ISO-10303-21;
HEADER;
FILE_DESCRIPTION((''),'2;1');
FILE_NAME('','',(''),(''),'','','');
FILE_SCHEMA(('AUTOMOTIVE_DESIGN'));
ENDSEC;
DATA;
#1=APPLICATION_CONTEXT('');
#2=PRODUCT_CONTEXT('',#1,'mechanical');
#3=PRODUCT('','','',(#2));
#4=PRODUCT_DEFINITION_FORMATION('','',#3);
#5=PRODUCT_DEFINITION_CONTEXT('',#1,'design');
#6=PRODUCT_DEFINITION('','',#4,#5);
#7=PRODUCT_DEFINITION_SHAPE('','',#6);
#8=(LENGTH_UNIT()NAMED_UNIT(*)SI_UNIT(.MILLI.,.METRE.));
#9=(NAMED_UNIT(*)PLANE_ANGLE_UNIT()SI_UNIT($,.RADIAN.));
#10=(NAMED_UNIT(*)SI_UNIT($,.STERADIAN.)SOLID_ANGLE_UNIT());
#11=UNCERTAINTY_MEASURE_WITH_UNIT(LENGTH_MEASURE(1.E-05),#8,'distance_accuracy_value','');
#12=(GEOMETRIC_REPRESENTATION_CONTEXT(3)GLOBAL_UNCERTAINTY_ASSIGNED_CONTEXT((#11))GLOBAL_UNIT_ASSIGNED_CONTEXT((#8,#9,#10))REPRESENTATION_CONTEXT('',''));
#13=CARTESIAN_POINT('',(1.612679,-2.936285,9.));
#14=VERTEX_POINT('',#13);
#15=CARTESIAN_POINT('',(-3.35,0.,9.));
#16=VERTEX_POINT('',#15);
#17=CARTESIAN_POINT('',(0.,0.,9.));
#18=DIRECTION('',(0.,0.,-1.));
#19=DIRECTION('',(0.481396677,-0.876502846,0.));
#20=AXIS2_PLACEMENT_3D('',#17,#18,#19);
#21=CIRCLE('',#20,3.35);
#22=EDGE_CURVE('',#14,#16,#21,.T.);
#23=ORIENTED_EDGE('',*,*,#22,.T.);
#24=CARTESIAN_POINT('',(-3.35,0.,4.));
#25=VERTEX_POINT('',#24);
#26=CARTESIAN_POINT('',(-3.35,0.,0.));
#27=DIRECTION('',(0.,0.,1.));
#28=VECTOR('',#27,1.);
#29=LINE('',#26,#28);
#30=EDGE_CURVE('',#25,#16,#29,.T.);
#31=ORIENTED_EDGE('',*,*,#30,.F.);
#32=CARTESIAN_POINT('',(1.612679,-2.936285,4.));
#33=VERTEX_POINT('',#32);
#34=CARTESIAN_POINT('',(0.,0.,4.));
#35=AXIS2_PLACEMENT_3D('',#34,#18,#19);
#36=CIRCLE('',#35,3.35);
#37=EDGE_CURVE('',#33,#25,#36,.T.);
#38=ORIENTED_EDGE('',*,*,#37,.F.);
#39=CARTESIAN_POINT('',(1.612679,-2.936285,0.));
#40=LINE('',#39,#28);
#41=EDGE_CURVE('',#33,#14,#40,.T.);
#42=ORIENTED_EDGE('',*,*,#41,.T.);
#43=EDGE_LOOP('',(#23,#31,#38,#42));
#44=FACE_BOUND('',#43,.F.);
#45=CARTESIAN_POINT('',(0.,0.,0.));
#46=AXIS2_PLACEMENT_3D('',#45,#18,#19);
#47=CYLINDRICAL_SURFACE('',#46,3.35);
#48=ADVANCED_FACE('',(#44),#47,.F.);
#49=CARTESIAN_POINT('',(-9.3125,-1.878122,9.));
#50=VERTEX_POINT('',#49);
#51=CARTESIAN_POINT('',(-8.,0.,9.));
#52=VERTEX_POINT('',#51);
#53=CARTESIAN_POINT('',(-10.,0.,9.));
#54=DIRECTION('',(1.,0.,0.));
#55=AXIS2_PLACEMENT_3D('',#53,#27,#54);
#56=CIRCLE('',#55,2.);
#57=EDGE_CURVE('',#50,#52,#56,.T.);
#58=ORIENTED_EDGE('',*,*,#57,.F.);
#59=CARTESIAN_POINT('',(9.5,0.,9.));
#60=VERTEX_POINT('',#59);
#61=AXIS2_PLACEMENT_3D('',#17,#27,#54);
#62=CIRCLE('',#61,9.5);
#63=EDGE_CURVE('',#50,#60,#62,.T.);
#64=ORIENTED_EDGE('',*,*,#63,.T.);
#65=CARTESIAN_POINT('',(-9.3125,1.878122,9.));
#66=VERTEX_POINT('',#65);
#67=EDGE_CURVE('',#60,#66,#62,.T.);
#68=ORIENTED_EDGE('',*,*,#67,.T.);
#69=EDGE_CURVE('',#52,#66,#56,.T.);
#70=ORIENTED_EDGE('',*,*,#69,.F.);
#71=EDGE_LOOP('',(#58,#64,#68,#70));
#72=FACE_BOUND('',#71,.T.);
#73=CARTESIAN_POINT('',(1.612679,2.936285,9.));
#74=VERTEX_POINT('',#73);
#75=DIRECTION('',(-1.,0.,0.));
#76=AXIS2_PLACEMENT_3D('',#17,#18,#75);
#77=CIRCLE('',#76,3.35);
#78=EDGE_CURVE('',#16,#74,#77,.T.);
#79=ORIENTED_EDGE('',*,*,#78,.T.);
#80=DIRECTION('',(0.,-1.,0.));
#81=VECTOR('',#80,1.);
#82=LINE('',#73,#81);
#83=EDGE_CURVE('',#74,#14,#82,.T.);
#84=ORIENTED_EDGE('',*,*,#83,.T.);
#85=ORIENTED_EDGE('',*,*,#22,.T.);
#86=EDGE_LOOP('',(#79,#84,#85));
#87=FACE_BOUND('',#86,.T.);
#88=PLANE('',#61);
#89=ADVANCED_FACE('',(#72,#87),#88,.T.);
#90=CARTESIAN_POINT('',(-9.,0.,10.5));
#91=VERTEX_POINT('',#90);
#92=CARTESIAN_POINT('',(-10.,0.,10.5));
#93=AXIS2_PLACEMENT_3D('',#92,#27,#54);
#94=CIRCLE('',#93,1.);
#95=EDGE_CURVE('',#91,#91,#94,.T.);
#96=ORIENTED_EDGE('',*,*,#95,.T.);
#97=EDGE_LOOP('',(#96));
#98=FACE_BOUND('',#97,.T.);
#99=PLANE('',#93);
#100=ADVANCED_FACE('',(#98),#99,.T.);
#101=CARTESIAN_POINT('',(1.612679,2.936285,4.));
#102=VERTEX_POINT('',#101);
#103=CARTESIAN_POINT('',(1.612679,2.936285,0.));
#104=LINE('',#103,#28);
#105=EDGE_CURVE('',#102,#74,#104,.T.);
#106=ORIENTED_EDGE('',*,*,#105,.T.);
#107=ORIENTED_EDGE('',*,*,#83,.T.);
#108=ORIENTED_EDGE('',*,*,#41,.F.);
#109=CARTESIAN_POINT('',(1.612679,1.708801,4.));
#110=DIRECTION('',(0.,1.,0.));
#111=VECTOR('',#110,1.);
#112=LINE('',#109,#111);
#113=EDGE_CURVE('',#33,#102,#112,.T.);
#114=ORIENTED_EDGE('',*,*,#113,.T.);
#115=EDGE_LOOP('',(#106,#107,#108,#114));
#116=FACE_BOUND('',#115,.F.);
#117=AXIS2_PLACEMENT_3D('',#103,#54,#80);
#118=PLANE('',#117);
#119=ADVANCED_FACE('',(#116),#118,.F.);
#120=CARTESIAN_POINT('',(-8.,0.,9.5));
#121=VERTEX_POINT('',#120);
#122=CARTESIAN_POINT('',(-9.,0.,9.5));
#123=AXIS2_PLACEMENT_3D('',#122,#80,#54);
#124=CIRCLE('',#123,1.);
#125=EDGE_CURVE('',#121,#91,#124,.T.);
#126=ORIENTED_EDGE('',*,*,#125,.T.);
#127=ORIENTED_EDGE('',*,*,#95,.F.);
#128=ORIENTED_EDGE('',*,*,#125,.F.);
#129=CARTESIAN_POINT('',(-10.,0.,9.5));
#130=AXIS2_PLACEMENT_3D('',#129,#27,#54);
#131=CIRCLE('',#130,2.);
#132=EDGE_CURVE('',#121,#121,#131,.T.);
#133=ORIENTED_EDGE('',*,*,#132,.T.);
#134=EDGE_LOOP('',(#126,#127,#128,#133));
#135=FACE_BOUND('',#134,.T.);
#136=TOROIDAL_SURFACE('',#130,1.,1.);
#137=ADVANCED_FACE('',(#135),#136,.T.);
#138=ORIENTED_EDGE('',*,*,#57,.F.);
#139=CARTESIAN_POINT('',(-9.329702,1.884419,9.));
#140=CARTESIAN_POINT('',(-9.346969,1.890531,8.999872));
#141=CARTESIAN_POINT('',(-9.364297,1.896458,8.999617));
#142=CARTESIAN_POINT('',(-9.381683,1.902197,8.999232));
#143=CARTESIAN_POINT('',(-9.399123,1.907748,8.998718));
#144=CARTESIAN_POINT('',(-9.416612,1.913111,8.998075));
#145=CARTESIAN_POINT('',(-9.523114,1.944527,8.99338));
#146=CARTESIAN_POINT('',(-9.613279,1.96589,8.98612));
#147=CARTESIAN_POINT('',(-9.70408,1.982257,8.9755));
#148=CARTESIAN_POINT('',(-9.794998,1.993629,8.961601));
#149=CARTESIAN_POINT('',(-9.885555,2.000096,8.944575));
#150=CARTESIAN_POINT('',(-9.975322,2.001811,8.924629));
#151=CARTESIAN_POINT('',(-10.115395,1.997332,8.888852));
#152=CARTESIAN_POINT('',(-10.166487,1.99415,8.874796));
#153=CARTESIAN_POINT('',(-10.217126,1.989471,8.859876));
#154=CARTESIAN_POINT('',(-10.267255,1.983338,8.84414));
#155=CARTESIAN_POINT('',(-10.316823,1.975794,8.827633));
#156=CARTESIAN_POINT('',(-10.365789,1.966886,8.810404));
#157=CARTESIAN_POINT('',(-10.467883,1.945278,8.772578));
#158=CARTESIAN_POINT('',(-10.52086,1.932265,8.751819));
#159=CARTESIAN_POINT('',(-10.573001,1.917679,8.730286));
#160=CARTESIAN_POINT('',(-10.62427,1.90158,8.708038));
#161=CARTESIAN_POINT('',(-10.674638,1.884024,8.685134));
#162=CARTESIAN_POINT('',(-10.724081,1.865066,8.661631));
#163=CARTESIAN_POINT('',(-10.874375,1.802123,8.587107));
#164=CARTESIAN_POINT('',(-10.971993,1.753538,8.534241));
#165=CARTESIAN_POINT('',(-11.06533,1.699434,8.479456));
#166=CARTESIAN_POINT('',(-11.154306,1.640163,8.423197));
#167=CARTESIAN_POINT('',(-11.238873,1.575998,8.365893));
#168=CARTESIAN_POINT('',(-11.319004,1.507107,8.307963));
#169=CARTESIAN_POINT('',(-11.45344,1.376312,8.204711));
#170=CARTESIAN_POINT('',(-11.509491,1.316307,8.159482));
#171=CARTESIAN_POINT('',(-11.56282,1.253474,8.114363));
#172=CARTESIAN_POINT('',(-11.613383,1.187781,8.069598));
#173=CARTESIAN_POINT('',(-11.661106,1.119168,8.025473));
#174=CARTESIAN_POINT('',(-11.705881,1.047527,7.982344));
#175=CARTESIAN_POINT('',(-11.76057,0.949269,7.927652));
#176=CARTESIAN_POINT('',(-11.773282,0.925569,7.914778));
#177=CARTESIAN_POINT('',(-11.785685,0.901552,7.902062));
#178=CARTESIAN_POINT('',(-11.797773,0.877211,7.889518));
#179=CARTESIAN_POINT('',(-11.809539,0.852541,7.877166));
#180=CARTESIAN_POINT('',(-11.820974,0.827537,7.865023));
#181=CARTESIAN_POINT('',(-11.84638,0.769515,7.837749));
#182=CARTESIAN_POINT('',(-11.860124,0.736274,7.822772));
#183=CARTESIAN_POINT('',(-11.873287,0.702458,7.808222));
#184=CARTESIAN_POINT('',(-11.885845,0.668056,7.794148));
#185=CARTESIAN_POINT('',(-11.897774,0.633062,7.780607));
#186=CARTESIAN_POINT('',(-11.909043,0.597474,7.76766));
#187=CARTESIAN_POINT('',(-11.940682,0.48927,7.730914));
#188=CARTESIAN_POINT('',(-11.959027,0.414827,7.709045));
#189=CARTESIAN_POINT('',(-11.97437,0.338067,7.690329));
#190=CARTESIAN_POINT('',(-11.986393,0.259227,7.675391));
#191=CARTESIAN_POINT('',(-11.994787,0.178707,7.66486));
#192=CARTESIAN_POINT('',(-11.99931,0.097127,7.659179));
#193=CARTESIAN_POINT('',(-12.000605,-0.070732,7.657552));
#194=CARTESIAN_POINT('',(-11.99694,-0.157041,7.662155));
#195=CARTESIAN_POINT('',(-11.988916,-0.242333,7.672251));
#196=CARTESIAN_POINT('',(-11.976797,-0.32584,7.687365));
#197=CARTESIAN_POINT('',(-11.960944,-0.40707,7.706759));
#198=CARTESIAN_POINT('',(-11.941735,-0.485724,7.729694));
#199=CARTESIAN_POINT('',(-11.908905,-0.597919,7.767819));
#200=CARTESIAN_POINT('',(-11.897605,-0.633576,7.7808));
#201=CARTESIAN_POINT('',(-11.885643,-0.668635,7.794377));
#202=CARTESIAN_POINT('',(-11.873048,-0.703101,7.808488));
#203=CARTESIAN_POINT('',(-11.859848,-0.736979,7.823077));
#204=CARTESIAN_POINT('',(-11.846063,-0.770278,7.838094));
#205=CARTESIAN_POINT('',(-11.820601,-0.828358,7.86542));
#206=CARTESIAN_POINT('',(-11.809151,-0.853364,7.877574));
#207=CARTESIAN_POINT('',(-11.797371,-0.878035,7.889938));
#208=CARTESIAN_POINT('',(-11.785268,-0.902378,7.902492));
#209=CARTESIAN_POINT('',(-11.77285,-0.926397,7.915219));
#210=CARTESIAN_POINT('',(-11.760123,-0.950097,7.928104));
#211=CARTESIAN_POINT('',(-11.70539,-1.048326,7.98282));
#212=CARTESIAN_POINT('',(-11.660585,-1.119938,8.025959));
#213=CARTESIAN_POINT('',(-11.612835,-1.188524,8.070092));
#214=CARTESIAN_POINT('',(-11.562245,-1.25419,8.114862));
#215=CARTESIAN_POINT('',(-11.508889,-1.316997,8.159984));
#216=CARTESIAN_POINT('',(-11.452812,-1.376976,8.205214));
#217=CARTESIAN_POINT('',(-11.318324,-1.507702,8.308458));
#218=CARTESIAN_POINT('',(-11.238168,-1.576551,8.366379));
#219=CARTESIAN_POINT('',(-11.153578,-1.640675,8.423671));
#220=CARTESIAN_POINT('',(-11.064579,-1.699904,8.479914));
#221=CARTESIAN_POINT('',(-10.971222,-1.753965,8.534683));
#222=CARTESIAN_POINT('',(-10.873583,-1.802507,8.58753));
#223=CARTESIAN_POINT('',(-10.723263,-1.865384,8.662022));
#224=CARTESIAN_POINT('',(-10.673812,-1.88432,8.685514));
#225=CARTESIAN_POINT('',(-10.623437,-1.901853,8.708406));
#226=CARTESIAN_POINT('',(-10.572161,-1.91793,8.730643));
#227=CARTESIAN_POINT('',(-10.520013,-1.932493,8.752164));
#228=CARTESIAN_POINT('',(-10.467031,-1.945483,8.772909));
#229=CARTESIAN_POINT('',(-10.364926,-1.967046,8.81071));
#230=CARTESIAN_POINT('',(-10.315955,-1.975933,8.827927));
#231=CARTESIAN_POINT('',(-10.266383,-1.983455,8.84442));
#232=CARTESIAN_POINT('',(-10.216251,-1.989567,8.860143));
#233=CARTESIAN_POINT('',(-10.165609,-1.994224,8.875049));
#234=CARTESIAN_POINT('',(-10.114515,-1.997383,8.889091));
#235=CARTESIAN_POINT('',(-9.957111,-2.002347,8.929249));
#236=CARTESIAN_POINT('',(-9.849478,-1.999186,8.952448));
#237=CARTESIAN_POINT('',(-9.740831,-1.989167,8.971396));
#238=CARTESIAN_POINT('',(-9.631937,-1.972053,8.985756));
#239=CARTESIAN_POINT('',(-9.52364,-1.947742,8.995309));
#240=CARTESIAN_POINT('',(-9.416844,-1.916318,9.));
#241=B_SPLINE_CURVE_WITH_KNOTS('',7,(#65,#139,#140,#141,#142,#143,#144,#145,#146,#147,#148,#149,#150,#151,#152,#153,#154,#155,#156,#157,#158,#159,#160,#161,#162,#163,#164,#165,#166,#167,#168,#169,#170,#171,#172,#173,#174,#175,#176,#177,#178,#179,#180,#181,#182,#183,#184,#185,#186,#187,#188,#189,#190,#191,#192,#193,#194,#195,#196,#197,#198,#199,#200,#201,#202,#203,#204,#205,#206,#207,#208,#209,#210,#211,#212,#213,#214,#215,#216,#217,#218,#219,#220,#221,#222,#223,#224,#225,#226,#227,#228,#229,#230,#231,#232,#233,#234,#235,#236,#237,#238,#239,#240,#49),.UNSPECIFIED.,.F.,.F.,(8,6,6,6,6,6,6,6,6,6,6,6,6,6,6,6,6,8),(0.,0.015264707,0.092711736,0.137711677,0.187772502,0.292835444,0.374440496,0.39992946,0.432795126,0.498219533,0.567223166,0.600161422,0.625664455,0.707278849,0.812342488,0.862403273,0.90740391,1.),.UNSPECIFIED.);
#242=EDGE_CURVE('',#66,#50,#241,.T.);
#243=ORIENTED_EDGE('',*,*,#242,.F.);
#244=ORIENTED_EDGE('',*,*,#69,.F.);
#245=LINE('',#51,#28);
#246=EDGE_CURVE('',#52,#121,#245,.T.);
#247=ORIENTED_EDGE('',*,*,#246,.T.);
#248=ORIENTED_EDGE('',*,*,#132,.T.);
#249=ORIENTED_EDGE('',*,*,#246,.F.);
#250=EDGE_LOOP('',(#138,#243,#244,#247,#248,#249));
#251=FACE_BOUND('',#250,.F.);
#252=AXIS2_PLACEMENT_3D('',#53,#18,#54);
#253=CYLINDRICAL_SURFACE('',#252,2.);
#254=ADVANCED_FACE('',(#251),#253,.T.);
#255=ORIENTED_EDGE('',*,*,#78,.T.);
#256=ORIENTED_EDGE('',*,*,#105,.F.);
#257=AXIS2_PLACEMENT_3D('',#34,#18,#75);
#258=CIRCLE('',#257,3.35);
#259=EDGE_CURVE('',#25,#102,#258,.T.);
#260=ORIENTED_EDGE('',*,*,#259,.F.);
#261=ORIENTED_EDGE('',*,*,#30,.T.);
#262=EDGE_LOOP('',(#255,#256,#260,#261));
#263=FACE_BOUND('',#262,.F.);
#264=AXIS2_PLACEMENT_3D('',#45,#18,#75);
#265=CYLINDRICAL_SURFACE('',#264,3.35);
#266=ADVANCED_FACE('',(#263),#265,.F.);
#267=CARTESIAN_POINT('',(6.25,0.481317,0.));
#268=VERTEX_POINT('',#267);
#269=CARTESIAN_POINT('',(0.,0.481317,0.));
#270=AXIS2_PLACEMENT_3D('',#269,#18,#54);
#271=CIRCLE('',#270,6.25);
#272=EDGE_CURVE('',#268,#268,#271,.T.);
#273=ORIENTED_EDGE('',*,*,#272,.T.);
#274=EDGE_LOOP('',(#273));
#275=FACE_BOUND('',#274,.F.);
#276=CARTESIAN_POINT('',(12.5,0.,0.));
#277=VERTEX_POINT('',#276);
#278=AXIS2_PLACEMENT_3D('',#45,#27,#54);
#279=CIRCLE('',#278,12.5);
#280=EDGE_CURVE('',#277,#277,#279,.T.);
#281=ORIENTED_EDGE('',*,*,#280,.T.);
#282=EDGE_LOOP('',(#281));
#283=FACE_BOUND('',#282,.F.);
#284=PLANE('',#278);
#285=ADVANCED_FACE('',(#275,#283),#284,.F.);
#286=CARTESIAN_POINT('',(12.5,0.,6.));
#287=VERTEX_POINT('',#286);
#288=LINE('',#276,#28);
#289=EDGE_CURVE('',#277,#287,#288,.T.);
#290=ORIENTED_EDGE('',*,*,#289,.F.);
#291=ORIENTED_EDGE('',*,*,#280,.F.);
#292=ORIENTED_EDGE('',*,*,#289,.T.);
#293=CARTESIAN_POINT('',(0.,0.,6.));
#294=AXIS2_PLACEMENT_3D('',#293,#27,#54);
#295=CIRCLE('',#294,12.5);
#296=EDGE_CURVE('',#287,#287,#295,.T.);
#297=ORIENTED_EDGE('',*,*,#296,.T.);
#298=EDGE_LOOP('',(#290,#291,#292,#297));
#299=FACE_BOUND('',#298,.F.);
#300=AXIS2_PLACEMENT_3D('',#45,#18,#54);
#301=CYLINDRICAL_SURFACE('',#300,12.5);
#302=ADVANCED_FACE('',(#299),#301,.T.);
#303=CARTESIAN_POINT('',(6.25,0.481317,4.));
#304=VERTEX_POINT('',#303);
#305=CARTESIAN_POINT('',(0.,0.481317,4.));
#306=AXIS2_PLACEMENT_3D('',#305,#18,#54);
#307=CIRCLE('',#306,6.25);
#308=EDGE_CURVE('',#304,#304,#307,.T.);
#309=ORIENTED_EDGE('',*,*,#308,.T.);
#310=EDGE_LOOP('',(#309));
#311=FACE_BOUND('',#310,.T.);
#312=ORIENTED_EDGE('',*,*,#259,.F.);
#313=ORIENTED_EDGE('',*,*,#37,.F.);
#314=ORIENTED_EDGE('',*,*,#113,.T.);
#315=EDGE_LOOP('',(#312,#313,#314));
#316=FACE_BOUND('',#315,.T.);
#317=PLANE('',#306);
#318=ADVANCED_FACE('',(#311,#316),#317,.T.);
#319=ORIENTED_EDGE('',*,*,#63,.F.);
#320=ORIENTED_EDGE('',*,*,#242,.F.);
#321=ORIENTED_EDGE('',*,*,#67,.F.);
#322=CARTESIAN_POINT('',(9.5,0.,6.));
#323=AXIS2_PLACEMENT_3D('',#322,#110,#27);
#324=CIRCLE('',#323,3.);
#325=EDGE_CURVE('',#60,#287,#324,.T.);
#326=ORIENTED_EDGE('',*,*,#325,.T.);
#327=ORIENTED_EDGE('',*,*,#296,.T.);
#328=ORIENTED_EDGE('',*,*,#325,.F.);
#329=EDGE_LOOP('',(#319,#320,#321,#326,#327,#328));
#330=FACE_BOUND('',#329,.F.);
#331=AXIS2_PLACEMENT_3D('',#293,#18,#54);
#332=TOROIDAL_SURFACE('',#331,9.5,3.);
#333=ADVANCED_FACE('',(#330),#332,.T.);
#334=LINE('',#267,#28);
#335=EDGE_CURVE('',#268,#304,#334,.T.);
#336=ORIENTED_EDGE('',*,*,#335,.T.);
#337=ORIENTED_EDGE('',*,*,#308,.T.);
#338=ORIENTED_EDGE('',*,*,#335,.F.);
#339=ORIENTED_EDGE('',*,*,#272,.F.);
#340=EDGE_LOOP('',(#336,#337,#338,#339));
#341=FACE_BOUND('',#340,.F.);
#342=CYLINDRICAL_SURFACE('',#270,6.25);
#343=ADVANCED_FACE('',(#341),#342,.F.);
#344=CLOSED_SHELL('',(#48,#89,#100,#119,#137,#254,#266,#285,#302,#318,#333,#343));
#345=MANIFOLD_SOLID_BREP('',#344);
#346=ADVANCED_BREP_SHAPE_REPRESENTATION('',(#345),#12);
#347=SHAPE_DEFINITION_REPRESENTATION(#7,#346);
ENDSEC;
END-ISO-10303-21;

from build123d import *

# Parameters (mm, degrees)
F0_R        = 12.5
F1_DEPTH    = 9
F2_R        = 6.25
F3_DEPTH    = 4
F4_R        = 2
F5_DEPTH    = 1.5
F6_R        = 1
F7_S5_R     = 2
F7_T6_DEPTH = 21


# Not quite as in the source:
# - a fillet or chamfer that OpenCascade refuses, or shapes differently, is made with other operations: its cross-section is extruded or revolved along the edge and cut away or added


with BuildPart() as f1:
    # F0 (on Top) → F1 (new body)
    with BuildSketch(Plane.XY):
        Circle(F0_R)
        with BuildLine():
            ThreePointArc((-3.35, 0), (-1.7058759905, 2.8831384124), (1.6126788687, 2.9362845343))
            Line((1.6126788687, 2.9362845343), (1.6126788687, 0))
            Line((1.6126788687, 0), (1.6126788687, -2.9362845343))
            ThreePointArc((1.6126788687, -2.9362845343), (-1.7058759905, -2.8831384124), (-3.35, 0))
        make_face(mode=Mode.SUBTRACT)
    extrude(amount=F1_DEPTH)

    # F2 (on face) → F3 (cut)
    with BuildSketch(Plane(origin=(0, 0, 0), x_dir=(1, 0, 0), z_dir=(0, 0, -1))):
        with Locations((0, -0.4813171179)):
            Circle(F2_R)
    extrude(amount=-F3_DEPTH, mode=Mode.SUBTRACT)

    # F4 (on face) → F5 (join)
    with BuildSketch(Plane.XY.offset(9)):
        with Locations((-10, 0)):
            Circle(F4_R)
    extrude(amount=F5_DEPTH)

    # F6
    f6_edges = [f1.edges().sort_by_distance(p)[0] for p in [
        (-12, 0, 10.5),
    ]]
    fillet(f6_edges, radius=F6_R)

    # F7: fillet of radius 3 on 1 edges, made by hand


with BuildPart() as f7_tool2:
    # F7_s3 → F7_t4 (revolve)
    with BuildSketch(Plane.XZ):
        with BuildLine():
            ThreePointArc((9.5, 9), (11.6213203436, 8.1213203436), (12.5, 6))
            Line((12.5, 6), (12.5, 9))
            Line((12.5, 9), (9.5, 9))
        make_face()
    revolve(axis=Axis((0, 0, 9), (0, 0, 1)))

    # F7_s5 → F7_t6 (cut, symmetric)
    with BuildSketch(Plane.XY.offset(6.4)):
        with Locations((-10, 0)):
            Circle(F7_S5_R)
    extrude(amount=F7_T6_DEPTH, both=True, mode=Mode.SUBTRACT)


with BuildPart() as f1_1:
    add(f1.part)

    # F7_t1: cut F7_tool2
    add(f7_tool2.part, mode=Mode.SUBTRACT)


solid = f1_1.part
